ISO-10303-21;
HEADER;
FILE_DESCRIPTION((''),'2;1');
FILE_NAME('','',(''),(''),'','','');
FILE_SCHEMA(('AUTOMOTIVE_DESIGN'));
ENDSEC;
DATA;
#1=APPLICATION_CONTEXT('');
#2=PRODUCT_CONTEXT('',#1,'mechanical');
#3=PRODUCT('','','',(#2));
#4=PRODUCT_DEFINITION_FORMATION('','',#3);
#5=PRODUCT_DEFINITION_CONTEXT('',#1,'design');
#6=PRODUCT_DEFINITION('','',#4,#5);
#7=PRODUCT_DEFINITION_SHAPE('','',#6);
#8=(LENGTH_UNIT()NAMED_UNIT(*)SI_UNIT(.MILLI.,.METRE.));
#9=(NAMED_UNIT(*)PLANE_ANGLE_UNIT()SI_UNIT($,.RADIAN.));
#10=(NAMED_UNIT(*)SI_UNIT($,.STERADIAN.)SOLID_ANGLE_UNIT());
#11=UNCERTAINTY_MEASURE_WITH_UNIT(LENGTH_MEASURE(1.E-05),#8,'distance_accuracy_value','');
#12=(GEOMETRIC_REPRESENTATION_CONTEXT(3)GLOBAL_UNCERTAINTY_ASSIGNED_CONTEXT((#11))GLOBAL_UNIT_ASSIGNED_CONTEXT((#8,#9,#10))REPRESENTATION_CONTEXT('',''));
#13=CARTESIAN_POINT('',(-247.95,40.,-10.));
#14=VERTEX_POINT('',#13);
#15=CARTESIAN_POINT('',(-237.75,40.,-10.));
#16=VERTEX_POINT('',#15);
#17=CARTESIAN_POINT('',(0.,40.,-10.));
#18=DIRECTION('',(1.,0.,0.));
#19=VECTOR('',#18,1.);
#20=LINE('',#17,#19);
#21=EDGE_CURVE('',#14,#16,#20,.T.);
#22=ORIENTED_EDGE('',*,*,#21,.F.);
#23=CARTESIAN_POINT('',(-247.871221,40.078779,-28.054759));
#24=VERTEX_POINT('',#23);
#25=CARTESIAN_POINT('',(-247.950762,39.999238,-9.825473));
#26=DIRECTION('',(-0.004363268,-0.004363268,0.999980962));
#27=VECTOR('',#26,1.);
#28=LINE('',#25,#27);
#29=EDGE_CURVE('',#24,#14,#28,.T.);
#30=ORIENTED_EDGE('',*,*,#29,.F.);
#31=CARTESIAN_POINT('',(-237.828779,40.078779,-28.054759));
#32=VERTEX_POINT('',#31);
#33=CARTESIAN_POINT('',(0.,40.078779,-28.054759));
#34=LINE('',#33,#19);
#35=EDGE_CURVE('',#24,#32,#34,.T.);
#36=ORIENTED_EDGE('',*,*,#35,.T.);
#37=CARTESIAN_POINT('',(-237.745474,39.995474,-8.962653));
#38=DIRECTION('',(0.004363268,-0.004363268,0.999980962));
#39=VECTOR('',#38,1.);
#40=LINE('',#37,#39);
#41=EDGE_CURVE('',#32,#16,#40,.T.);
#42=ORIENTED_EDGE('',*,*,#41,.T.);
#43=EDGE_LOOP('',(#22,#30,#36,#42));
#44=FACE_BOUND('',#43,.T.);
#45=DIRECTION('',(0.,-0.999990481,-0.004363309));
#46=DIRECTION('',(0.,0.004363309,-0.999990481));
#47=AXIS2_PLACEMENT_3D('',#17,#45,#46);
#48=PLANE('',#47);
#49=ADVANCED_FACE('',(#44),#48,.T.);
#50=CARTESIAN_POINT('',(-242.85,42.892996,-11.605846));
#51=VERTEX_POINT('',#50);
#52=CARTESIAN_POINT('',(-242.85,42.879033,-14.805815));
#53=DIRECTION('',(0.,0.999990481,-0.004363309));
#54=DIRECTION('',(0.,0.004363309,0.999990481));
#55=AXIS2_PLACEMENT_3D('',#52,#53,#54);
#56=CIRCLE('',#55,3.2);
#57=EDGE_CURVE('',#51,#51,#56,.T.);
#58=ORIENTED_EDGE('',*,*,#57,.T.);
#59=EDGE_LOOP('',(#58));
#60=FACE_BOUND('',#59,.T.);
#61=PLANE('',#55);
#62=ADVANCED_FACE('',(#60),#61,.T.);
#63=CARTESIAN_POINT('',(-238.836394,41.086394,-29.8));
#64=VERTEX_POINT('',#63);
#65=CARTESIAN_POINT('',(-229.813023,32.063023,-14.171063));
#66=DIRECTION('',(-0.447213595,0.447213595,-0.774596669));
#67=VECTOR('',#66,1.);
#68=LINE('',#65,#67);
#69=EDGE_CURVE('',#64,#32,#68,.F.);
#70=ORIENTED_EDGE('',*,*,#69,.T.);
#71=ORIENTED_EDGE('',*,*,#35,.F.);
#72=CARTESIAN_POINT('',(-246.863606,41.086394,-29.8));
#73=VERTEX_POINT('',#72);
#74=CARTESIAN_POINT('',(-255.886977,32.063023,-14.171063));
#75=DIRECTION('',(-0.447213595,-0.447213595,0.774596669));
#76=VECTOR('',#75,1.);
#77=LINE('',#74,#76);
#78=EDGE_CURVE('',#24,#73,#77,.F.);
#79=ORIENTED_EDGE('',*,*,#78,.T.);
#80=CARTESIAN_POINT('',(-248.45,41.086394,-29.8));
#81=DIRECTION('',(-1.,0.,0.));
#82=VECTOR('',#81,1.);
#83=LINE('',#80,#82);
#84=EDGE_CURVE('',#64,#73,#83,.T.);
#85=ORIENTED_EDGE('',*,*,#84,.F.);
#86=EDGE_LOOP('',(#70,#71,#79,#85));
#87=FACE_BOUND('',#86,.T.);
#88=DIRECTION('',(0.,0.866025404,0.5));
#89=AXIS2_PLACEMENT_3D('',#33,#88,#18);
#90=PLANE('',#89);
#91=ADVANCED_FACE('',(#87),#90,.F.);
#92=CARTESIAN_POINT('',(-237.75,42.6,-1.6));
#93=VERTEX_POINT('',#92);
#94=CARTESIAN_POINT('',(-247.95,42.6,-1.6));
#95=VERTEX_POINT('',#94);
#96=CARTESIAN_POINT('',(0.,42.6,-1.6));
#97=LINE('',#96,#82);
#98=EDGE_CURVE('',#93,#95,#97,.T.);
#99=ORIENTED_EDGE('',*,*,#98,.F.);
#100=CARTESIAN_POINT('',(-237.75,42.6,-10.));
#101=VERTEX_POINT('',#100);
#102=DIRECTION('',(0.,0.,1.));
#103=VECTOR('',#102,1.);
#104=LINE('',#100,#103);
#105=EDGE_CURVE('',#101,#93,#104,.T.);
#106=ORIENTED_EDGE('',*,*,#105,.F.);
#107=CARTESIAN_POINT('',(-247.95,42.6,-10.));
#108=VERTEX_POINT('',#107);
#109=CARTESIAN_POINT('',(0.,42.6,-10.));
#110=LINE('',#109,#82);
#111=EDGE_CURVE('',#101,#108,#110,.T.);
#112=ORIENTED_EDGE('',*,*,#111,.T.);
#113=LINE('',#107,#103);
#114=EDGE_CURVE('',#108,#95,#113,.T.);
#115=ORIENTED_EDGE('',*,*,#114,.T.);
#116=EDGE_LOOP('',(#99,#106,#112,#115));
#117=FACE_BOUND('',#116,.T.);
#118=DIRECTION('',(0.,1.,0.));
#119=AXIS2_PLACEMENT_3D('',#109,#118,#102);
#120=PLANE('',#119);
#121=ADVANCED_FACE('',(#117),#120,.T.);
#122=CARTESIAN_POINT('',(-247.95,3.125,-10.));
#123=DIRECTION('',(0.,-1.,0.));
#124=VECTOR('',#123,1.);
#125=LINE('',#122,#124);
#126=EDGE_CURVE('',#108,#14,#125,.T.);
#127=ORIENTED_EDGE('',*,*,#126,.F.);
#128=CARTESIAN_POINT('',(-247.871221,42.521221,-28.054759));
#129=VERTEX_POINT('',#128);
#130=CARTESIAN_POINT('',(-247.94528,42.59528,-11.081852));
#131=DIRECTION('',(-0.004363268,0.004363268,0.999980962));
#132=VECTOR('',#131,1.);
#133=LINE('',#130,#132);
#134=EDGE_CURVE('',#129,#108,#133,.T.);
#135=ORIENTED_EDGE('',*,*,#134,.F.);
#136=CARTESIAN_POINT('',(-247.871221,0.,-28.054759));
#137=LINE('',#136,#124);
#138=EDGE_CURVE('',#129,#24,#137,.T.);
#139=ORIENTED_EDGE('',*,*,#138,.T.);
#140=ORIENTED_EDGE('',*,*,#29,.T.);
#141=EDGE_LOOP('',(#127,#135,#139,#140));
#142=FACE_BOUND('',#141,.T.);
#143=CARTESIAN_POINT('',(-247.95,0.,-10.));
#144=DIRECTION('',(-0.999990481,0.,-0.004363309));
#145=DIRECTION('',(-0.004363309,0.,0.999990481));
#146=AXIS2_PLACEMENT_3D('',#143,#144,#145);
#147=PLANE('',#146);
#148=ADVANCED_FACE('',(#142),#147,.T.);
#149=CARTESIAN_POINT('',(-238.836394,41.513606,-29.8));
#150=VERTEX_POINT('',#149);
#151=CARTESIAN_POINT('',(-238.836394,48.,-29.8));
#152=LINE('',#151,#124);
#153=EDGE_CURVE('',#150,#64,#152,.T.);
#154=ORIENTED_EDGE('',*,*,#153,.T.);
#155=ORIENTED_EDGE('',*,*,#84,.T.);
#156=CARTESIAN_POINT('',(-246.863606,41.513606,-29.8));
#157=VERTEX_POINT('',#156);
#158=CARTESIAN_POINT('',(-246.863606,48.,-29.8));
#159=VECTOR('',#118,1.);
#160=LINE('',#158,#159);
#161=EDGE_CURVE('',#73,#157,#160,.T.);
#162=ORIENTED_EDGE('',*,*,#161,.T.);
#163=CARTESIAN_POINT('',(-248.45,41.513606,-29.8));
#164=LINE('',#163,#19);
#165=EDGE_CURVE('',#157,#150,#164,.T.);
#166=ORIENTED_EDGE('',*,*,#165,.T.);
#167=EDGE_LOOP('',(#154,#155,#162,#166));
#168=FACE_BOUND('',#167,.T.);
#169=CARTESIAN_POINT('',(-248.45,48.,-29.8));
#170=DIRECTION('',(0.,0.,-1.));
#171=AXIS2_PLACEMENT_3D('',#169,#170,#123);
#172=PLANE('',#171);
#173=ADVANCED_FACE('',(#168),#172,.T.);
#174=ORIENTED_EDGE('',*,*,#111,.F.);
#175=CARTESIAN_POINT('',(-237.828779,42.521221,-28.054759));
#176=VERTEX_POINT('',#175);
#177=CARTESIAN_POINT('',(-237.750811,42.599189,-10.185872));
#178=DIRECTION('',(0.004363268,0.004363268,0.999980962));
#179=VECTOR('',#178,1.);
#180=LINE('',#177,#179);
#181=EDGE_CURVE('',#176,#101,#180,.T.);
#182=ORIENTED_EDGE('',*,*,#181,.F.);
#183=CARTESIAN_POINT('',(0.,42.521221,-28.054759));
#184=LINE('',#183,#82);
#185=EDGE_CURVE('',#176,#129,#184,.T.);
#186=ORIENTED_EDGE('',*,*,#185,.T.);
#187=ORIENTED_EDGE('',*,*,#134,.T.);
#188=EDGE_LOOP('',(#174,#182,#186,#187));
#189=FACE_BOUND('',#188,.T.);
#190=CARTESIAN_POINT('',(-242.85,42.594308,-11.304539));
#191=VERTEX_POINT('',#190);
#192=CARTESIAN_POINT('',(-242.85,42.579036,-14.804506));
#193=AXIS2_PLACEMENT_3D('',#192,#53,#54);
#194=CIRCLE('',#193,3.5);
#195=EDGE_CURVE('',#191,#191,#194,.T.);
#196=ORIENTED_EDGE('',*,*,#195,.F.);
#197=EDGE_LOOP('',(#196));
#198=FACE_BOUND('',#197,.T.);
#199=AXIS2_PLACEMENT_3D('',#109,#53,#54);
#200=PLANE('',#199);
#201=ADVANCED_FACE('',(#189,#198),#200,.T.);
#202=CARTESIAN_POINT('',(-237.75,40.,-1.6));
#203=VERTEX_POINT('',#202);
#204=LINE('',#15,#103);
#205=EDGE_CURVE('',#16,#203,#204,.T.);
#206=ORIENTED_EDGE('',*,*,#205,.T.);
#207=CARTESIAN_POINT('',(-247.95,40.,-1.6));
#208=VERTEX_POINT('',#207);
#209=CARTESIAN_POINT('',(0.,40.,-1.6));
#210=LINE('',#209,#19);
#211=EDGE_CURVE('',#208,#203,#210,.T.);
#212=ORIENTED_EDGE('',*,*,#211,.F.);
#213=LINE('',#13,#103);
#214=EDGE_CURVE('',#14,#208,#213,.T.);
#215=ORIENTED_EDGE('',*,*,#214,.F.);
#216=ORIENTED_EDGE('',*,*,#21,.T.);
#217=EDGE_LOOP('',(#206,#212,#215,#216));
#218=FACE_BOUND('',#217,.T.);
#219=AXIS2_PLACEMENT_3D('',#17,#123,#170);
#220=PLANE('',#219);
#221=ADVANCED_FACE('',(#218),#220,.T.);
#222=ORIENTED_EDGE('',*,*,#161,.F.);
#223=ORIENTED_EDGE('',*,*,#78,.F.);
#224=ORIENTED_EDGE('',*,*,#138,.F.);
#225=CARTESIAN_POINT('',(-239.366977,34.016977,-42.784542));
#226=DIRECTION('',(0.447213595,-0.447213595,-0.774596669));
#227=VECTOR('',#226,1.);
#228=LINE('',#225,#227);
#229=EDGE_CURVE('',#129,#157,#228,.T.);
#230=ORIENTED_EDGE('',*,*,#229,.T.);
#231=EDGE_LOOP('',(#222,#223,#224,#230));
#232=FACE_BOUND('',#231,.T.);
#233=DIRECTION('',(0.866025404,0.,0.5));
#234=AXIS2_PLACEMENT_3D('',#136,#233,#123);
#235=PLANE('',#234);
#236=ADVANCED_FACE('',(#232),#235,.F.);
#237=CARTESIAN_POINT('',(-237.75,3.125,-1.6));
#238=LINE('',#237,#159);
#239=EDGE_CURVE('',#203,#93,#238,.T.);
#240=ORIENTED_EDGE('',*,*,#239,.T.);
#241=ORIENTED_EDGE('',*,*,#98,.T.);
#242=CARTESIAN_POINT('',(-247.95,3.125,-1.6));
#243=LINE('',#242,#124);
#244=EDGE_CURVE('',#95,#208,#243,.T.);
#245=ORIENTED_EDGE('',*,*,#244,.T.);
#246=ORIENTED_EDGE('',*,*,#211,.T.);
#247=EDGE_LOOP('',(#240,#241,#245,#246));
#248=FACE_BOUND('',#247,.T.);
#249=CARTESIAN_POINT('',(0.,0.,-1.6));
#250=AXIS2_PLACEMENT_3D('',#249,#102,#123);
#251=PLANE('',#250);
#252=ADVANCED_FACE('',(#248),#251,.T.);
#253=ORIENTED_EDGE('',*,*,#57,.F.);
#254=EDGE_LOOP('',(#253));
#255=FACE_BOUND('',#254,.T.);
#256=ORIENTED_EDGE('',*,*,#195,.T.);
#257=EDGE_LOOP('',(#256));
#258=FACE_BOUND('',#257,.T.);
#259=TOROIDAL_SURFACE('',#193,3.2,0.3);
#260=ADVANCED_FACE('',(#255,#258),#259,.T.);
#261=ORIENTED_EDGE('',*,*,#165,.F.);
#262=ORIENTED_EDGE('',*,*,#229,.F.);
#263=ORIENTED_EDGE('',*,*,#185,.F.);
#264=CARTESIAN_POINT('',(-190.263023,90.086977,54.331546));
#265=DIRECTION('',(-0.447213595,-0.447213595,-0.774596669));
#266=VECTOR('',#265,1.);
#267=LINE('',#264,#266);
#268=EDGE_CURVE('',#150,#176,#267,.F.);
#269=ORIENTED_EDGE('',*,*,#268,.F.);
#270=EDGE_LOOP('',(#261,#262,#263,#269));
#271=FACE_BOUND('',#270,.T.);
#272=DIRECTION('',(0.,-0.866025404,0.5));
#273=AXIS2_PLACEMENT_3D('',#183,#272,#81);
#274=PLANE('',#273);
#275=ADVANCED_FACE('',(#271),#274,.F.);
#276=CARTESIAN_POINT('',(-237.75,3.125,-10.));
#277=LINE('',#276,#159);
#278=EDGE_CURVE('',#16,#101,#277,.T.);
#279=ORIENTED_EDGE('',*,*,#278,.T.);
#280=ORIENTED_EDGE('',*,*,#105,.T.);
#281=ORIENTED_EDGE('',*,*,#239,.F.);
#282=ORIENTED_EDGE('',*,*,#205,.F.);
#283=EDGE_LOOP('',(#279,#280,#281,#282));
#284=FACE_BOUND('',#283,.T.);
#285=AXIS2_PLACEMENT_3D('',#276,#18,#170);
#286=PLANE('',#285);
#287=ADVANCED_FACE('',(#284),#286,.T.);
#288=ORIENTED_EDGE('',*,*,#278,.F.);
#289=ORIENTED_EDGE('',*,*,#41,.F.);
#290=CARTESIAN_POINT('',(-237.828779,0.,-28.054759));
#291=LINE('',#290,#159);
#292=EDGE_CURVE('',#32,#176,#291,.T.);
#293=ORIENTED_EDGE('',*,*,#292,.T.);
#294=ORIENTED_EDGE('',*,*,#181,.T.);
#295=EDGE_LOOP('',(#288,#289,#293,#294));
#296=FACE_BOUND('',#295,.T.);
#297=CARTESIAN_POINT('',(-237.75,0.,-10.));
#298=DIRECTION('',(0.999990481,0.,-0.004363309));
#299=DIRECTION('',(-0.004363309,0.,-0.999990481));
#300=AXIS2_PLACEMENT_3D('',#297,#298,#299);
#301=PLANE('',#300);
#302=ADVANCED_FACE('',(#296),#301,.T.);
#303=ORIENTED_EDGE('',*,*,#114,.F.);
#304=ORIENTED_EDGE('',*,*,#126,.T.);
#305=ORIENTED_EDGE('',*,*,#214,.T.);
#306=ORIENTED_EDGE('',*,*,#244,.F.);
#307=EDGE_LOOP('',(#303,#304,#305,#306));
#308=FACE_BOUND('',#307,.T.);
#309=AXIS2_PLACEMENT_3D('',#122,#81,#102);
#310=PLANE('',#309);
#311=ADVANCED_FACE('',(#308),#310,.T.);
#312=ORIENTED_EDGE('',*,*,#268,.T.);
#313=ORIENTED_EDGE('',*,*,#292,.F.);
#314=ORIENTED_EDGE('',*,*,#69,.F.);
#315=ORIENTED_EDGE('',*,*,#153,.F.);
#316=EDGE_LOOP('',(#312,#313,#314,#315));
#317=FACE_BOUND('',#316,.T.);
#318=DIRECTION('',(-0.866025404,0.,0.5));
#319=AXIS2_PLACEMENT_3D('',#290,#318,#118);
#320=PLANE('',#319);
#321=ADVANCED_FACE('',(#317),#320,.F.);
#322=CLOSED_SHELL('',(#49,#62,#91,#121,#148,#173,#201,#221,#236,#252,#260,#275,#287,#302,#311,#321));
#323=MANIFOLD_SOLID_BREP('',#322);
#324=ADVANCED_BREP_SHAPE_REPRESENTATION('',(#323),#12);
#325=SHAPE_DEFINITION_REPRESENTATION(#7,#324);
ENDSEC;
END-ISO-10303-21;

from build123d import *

# Parameters (mm, degrees)
SHIM_TOP_START          = -1.6
SHIM_SKETCH_W           = 10.2
SHIM_SKETCH_H           = 2.6
SHIM_TOP_DEPTH          = 8.4
SHIM_BOTTOM_OUTLINE_W   = 10.027211308
SHIM_BOTTOM_OUTLINE_H   = 2.427211308
SHIM_BOTTOM_DEPTH       = 19.8
SHIM_BOTTOM_DRAFT       = -0.25
CHAMFER_2_SIZE          = 1
CHAMFER_2_SIZE2         = 1.745257156
RETAINING_BUMP_SKETCH_R = 3.5
RETAINING_BUMP_DEPTH    = 0.3
FILLET1_R               = 0.3


# Read off the part's stored shape, not the designer's step: shim_bottom
with BuildPart() as part:
    # shim_sketch → shim_top (new body)
    with BuildSketch(Plane.XY.offset(SHIM_TOP_START)):
        with Locations((-242.85, 41.3)):
            Rectangle(SHIM_SKETCH_W, SHIM_SKETCH_H)
    extrude(amount=-SHIM_TOP_DEPTH)


with BuildPart() as shim_bottom_tool:
    # shim_bottom outline → shim_bottom (with draft: the straight prism first)
    with BuildSketch(Plane.XY.offset(-29.8)):
        with Locations((-242.85, 41.3)):
            Rectangle(SHIM_BOTTOM_OUTLINE_W, SHIM_BOTTOM_OUTLINE_H)
    extrude(amount=SHIM_BOTTOM_DEPTH)
    # shim_bottom: the draft: its side faces are tilted about the plane it starts from
    shim_bottom_sides = [shim_bottom_tool.faces().sort_by_distance(p)[0] for p in [
        (-242.85, 40.086394346, -19.9),
        (-237.836394346, 41.3, -19.9),
        (-242.85, 42.513605654, -19.9),
        (-247.863605654, 41.3, -19.9),
    ]]
    draft(shim_bottom_sides, Plane.XY.offset(-29.8), SHIM_BOTTOM_DRAFT)


with BuildPart() as part_1:
    add(part.part)

    # shim_bottom: add shim_bottom_tool
    add(shim_bottom_tool.part)

    # Chamfer 2
    chamfer_2_edges = [part_1.edges().sort_by_distance(p)[0] for p in [
        (-237.836394346, 41.3, -29.8),
        (-242.85, 42.513605654, -29.8),
        (-247.863605654, 41.3, -29.8),
        (-242.85, 40.086394346, -29.8),
    ]]
    chamfer_2_side = [part_1.faces().sort_by_distance(p)[0] for p in [
        (-242.85, 41.3, -29.8),
    ]]
    chamfer(chamfer_2_edges, length=CHAMFER_2_SIZE, length2=CHAMFER_2_SIZE2, reference=chamfer_2_side[0])

    # retaining_bump_sketch → retaining_bump (add)
    with BuildSketch(Plane(origin=(0, 42.642821639, -0.186065591), x_dir=(1, 0, 0), z_dir=(0, 0.9999904807207346, -0.004363309284746581))):
        with Locations(Location((-242.85, 14.618579624, 0), (0, 0, 270))):
            Circle(RETAINING_BUMP_SKETCH_R)
    extrude(amount=RETAINING_BUMP_DEPTH)

    # Fillet1
    fillet1_edges = [part_1.edges().sort_by_distance(p)[0] for p in [
        (-242.85, 42.863761816, -18.305781732),
    ]]
    fillet(fillet1_edges, radius=FILLET1_R - 0.0001)  # a hair under: the kernel refuses the full size


solid = part_1.part
